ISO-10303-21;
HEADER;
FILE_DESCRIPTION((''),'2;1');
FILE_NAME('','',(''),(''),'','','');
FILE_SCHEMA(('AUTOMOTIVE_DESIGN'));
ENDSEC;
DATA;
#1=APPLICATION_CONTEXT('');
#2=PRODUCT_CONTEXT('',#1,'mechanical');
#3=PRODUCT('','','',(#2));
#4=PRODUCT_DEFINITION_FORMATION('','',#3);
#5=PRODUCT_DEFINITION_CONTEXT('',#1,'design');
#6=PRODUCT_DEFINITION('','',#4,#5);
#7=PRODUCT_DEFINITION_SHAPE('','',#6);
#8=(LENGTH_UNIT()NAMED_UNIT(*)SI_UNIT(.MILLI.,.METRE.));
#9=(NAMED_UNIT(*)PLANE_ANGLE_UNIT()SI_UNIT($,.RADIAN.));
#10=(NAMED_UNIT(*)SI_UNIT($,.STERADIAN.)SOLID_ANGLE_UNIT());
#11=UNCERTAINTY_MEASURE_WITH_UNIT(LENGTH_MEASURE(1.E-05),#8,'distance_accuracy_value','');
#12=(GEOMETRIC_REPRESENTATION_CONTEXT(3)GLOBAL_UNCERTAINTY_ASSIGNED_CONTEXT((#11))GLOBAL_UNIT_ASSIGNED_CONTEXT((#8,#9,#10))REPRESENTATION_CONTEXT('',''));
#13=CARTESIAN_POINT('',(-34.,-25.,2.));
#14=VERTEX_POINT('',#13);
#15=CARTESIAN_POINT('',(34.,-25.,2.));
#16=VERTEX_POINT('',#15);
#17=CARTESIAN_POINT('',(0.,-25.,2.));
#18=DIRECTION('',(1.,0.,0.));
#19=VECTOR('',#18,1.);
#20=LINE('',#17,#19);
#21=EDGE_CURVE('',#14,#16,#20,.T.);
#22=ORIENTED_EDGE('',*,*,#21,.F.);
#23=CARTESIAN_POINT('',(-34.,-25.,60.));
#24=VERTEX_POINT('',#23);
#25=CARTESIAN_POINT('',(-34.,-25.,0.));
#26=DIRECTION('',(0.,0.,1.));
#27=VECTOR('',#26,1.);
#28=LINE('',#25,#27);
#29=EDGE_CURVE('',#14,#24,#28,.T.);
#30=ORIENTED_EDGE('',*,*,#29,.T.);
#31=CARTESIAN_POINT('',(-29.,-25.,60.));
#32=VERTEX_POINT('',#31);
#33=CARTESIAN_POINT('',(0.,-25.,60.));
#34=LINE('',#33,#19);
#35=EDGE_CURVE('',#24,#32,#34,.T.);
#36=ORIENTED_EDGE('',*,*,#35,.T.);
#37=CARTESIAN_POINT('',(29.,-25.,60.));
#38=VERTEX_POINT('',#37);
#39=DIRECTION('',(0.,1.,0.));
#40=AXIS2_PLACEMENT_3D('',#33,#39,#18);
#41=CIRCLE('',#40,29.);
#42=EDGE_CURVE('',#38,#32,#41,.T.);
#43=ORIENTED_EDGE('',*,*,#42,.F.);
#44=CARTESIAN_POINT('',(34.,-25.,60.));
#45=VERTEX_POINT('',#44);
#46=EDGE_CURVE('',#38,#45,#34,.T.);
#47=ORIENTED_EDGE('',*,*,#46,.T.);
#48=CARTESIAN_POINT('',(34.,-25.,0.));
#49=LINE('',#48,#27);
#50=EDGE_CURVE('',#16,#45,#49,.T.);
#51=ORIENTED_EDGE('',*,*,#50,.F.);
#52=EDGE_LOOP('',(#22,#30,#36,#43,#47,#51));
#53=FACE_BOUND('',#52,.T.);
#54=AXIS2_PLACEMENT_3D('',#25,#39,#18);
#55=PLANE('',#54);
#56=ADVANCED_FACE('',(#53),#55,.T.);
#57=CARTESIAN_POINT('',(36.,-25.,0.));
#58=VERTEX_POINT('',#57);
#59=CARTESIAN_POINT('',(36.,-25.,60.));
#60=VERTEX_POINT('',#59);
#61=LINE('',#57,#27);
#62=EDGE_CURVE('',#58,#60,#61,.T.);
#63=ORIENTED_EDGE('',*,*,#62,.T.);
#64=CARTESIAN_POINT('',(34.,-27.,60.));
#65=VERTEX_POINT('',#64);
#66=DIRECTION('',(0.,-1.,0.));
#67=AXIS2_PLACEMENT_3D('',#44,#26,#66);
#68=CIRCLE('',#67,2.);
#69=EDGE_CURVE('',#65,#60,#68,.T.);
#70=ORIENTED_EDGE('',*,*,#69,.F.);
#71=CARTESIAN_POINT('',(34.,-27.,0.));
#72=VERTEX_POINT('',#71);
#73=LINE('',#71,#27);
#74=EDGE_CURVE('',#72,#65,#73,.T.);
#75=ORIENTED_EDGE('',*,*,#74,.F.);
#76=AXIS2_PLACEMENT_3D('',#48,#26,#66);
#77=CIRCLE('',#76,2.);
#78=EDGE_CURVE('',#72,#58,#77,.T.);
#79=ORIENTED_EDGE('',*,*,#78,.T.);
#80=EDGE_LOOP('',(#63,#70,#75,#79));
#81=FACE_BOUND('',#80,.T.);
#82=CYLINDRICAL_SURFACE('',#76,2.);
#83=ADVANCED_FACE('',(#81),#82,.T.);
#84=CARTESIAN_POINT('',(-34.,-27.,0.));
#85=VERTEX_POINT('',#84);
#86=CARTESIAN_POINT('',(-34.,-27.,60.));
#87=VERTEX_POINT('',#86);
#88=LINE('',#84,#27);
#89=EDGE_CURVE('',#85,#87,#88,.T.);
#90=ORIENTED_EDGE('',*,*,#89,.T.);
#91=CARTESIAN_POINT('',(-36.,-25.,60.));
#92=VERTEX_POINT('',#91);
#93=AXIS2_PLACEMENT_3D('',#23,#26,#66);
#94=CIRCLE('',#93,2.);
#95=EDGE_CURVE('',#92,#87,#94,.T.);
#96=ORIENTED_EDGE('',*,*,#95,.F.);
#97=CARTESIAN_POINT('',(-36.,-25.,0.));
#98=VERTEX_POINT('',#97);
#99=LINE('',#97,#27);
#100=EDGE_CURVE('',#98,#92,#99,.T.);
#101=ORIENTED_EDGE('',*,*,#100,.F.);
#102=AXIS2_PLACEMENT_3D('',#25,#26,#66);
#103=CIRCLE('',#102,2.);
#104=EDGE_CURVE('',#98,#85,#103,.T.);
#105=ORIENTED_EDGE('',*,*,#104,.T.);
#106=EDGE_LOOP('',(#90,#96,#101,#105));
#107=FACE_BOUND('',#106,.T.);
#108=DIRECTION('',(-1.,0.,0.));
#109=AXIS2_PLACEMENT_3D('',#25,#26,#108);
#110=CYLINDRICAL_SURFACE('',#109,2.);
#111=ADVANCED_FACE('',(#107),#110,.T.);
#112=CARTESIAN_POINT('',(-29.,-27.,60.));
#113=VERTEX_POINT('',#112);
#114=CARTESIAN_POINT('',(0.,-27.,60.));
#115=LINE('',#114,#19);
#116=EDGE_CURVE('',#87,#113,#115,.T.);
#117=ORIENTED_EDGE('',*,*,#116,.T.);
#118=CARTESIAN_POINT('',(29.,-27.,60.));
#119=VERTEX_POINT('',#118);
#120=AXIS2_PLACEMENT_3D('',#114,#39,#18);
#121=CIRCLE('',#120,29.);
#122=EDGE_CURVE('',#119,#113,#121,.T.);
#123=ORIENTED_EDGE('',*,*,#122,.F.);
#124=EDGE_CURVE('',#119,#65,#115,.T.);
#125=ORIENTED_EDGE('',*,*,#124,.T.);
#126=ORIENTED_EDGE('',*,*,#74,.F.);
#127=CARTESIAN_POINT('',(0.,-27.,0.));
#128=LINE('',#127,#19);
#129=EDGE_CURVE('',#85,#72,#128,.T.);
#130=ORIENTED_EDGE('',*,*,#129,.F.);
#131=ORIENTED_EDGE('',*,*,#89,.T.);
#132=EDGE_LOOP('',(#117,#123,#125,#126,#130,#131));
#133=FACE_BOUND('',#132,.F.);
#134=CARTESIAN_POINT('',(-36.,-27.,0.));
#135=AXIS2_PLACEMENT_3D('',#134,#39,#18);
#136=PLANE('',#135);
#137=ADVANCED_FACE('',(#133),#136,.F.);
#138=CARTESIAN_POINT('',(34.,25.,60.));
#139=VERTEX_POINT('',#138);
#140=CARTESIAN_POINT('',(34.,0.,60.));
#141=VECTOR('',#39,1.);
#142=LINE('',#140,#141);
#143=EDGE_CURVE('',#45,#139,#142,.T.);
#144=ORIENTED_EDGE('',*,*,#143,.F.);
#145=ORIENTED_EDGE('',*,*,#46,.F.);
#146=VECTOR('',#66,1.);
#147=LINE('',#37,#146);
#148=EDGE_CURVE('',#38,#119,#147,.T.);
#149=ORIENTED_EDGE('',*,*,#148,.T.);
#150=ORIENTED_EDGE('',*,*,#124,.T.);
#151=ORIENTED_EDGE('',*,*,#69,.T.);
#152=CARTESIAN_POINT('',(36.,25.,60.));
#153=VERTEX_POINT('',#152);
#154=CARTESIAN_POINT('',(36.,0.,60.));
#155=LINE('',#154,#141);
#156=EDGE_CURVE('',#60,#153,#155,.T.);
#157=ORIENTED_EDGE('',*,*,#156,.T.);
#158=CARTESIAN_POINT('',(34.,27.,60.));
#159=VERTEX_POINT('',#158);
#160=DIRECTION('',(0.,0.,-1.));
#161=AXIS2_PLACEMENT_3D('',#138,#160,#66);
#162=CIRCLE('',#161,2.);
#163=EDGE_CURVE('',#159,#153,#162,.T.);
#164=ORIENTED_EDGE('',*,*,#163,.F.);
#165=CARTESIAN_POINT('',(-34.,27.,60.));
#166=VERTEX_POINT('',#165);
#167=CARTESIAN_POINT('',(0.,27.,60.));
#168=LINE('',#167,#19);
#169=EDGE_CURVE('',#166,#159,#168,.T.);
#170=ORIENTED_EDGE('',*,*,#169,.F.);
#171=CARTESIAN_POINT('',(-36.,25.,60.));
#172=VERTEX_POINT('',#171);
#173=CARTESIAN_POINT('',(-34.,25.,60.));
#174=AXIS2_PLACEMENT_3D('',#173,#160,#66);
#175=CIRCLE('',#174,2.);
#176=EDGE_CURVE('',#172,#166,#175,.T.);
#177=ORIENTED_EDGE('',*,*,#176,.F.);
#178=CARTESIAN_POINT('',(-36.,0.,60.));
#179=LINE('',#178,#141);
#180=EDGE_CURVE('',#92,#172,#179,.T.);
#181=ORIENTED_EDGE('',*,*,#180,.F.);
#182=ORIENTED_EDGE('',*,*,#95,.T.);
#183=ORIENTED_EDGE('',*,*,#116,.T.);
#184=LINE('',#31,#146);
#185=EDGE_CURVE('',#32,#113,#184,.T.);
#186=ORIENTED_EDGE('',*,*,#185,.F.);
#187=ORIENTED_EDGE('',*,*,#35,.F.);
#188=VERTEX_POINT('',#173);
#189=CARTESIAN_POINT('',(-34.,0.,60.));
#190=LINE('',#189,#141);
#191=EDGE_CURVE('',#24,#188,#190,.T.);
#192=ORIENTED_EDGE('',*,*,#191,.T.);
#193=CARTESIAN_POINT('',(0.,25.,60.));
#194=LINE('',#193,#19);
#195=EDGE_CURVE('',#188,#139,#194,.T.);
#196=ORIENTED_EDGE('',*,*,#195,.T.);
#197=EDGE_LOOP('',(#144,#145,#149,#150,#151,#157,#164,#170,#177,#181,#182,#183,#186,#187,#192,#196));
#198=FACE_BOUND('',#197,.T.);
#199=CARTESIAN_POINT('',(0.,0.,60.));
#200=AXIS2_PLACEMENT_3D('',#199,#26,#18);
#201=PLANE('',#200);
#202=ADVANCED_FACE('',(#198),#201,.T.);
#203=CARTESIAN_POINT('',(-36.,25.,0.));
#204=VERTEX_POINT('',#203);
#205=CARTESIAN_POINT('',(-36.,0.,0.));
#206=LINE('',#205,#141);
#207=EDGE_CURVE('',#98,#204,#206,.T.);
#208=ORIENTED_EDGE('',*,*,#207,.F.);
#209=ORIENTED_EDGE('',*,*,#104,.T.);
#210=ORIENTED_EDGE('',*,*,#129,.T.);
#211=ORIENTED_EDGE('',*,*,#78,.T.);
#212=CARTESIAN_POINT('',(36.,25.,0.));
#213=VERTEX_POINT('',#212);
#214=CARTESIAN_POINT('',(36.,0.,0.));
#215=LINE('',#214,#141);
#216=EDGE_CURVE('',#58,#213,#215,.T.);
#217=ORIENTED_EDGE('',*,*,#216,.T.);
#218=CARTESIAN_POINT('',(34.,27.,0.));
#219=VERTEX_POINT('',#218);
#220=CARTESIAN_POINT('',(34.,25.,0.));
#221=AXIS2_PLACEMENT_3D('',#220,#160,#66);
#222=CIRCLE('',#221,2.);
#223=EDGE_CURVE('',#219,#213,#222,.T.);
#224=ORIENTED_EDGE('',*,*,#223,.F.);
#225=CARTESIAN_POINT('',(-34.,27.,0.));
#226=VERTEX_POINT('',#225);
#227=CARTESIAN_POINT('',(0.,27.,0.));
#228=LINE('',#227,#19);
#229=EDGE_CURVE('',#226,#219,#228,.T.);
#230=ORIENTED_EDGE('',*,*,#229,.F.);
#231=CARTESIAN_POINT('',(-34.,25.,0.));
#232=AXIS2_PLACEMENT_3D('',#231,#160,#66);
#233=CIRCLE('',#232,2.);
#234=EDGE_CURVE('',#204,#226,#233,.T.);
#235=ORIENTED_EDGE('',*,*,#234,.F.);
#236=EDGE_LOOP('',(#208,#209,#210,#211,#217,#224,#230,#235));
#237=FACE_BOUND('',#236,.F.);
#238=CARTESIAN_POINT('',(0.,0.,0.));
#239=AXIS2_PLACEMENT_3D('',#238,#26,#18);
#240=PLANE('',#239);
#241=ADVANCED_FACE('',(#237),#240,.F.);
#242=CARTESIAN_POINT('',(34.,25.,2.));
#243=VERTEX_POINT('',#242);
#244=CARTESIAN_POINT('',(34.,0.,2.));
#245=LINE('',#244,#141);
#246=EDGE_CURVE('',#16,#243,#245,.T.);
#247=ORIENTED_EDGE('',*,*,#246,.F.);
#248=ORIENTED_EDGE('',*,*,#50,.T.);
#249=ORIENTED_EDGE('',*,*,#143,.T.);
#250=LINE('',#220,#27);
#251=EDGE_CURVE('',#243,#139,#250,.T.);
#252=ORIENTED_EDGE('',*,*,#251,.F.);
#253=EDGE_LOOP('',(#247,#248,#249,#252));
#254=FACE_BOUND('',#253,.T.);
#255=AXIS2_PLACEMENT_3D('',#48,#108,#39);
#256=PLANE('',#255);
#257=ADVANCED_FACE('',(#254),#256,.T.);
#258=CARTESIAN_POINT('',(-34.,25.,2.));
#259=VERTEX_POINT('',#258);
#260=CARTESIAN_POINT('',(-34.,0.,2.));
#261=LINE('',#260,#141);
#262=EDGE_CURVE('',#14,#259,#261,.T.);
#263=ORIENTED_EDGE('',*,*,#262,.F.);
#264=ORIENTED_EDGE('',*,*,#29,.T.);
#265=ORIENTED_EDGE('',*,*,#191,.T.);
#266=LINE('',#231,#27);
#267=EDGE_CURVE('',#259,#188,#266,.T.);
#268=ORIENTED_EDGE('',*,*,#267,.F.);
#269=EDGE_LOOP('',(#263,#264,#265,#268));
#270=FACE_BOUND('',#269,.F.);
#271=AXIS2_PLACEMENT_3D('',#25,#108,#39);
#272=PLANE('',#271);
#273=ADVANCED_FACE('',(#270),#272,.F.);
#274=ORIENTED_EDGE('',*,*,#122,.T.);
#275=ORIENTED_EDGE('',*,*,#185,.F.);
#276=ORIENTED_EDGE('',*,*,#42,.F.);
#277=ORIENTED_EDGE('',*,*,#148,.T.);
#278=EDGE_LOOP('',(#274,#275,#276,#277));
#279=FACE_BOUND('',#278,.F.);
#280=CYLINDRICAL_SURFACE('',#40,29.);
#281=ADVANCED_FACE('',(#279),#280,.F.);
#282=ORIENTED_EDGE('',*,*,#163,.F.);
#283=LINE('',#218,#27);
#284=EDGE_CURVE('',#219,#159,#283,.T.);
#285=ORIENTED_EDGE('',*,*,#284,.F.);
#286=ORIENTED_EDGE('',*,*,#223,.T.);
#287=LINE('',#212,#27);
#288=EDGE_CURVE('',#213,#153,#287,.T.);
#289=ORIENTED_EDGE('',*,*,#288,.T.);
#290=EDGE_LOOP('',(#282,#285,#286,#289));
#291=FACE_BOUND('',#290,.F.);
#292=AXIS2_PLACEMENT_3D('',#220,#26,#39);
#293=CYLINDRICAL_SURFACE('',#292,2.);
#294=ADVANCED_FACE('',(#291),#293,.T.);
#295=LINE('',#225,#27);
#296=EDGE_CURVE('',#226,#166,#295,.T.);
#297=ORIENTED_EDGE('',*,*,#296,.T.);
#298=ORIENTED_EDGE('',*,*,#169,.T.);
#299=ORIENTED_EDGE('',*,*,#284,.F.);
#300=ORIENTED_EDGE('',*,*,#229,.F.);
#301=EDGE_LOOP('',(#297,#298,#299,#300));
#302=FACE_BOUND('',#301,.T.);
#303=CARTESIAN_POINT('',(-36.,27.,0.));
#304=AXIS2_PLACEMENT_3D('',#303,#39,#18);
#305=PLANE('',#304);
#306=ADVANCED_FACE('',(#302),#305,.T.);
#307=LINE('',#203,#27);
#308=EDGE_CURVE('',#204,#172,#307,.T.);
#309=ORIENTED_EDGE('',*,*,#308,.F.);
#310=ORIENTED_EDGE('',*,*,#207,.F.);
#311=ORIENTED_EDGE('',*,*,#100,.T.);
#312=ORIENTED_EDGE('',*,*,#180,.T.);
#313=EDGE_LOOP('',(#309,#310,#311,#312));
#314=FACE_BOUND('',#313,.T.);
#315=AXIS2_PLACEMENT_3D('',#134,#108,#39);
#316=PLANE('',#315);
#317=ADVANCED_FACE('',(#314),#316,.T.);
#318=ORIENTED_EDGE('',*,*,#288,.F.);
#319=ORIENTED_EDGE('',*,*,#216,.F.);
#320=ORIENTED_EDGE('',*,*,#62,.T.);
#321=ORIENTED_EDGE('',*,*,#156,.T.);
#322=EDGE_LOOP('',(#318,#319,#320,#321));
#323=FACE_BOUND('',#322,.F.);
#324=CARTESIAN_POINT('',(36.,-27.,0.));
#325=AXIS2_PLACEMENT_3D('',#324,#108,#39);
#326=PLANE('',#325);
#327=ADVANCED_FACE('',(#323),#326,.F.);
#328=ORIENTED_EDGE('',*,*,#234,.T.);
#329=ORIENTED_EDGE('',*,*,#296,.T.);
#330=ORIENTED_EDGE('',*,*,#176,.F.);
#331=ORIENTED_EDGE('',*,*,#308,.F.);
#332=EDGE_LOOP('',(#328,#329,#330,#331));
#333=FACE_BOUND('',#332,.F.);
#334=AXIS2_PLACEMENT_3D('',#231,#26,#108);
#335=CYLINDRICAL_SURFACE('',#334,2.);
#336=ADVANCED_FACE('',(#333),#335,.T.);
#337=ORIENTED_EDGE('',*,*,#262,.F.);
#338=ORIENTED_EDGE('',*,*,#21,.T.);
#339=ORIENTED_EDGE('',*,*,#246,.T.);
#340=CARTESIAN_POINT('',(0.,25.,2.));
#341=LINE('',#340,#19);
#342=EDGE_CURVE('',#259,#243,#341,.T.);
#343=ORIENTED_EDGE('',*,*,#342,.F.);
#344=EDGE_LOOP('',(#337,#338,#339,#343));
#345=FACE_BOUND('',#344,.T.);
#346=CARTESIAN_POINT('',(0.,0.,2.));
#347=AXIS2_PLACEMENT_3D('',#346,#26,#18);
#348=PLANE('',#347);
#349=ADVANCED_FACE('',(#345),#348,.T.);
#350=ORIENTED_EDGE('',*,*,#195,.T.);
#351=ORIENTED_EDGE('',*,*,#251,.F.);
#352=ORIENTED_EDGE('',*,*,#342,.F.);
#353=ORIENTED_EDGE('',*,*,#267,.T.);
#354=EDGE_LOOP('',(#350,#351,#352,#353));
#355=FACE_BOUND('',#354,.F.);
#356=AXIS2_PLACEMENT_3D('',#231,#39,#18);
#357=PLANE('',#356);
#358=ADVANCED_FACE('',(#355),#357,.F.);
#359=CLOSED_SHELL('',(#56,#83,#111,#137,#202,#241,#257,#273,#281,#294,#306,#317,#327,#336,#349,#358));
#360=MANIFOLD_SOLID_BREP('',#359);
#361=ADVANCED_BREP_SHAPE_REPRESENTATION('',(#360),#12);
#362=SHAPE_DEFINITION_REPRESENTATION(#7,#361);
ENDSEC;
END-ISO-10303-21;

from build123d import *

# Parameters (mm, degrees)
F0_W     = 68
F0_H     = 50
F1_DEPTH = 2
F0_W_2   = 72
F0_H_2   = 54
F2_DEPTH = 60
F4_DEPTH = 25
F5_R     = 2


# Not quite as in the source:
# - a feature names something its author has since deleted; it is built from what else it names


with BuildPart() as f1:
    # F0 (on Top) → F1 (new body)
    with BuildSketch(Plane.XY):
        Rectangle(F0_W, F0_H)
    extrude(amount=F1_DEPTH)

    # F0 (on Top) → F2 (join)
    with BuildSketch(Plane.XY):
        Rectangle(F0_W_2, F0_H_2)
        Rectangle(F0_W, F0_H, mode=Mode.SUBTRACT)
    extrude(amount=F2_DEPTH)

    # F3 (on face) → F4 (cut)
    with BuildSketch(Plane(origin=(0, -25, 0), x_dir=(-1, 0, 0), z_dir=(0, 1, 0))):
        with BuildLine():
            Line((29, 60), (-29, 60))
            ThreePointArc((-29, 60), (0, 31), (29, 60))
        make_face()
    extrude(amount=-F4_DEPTH, mode=Mode.SUBTRACT)

    # F5
    f5_edges = [f1.edges().sort_by_distance(p)[0] for p in [
        (-36, 27, 30),
        (36, 27, 30),
        (-36, -27, 30),
        (36, -27, 30),
    ]]
    fillet(f5_edges, radius=F5_R)


solid = f1.part
